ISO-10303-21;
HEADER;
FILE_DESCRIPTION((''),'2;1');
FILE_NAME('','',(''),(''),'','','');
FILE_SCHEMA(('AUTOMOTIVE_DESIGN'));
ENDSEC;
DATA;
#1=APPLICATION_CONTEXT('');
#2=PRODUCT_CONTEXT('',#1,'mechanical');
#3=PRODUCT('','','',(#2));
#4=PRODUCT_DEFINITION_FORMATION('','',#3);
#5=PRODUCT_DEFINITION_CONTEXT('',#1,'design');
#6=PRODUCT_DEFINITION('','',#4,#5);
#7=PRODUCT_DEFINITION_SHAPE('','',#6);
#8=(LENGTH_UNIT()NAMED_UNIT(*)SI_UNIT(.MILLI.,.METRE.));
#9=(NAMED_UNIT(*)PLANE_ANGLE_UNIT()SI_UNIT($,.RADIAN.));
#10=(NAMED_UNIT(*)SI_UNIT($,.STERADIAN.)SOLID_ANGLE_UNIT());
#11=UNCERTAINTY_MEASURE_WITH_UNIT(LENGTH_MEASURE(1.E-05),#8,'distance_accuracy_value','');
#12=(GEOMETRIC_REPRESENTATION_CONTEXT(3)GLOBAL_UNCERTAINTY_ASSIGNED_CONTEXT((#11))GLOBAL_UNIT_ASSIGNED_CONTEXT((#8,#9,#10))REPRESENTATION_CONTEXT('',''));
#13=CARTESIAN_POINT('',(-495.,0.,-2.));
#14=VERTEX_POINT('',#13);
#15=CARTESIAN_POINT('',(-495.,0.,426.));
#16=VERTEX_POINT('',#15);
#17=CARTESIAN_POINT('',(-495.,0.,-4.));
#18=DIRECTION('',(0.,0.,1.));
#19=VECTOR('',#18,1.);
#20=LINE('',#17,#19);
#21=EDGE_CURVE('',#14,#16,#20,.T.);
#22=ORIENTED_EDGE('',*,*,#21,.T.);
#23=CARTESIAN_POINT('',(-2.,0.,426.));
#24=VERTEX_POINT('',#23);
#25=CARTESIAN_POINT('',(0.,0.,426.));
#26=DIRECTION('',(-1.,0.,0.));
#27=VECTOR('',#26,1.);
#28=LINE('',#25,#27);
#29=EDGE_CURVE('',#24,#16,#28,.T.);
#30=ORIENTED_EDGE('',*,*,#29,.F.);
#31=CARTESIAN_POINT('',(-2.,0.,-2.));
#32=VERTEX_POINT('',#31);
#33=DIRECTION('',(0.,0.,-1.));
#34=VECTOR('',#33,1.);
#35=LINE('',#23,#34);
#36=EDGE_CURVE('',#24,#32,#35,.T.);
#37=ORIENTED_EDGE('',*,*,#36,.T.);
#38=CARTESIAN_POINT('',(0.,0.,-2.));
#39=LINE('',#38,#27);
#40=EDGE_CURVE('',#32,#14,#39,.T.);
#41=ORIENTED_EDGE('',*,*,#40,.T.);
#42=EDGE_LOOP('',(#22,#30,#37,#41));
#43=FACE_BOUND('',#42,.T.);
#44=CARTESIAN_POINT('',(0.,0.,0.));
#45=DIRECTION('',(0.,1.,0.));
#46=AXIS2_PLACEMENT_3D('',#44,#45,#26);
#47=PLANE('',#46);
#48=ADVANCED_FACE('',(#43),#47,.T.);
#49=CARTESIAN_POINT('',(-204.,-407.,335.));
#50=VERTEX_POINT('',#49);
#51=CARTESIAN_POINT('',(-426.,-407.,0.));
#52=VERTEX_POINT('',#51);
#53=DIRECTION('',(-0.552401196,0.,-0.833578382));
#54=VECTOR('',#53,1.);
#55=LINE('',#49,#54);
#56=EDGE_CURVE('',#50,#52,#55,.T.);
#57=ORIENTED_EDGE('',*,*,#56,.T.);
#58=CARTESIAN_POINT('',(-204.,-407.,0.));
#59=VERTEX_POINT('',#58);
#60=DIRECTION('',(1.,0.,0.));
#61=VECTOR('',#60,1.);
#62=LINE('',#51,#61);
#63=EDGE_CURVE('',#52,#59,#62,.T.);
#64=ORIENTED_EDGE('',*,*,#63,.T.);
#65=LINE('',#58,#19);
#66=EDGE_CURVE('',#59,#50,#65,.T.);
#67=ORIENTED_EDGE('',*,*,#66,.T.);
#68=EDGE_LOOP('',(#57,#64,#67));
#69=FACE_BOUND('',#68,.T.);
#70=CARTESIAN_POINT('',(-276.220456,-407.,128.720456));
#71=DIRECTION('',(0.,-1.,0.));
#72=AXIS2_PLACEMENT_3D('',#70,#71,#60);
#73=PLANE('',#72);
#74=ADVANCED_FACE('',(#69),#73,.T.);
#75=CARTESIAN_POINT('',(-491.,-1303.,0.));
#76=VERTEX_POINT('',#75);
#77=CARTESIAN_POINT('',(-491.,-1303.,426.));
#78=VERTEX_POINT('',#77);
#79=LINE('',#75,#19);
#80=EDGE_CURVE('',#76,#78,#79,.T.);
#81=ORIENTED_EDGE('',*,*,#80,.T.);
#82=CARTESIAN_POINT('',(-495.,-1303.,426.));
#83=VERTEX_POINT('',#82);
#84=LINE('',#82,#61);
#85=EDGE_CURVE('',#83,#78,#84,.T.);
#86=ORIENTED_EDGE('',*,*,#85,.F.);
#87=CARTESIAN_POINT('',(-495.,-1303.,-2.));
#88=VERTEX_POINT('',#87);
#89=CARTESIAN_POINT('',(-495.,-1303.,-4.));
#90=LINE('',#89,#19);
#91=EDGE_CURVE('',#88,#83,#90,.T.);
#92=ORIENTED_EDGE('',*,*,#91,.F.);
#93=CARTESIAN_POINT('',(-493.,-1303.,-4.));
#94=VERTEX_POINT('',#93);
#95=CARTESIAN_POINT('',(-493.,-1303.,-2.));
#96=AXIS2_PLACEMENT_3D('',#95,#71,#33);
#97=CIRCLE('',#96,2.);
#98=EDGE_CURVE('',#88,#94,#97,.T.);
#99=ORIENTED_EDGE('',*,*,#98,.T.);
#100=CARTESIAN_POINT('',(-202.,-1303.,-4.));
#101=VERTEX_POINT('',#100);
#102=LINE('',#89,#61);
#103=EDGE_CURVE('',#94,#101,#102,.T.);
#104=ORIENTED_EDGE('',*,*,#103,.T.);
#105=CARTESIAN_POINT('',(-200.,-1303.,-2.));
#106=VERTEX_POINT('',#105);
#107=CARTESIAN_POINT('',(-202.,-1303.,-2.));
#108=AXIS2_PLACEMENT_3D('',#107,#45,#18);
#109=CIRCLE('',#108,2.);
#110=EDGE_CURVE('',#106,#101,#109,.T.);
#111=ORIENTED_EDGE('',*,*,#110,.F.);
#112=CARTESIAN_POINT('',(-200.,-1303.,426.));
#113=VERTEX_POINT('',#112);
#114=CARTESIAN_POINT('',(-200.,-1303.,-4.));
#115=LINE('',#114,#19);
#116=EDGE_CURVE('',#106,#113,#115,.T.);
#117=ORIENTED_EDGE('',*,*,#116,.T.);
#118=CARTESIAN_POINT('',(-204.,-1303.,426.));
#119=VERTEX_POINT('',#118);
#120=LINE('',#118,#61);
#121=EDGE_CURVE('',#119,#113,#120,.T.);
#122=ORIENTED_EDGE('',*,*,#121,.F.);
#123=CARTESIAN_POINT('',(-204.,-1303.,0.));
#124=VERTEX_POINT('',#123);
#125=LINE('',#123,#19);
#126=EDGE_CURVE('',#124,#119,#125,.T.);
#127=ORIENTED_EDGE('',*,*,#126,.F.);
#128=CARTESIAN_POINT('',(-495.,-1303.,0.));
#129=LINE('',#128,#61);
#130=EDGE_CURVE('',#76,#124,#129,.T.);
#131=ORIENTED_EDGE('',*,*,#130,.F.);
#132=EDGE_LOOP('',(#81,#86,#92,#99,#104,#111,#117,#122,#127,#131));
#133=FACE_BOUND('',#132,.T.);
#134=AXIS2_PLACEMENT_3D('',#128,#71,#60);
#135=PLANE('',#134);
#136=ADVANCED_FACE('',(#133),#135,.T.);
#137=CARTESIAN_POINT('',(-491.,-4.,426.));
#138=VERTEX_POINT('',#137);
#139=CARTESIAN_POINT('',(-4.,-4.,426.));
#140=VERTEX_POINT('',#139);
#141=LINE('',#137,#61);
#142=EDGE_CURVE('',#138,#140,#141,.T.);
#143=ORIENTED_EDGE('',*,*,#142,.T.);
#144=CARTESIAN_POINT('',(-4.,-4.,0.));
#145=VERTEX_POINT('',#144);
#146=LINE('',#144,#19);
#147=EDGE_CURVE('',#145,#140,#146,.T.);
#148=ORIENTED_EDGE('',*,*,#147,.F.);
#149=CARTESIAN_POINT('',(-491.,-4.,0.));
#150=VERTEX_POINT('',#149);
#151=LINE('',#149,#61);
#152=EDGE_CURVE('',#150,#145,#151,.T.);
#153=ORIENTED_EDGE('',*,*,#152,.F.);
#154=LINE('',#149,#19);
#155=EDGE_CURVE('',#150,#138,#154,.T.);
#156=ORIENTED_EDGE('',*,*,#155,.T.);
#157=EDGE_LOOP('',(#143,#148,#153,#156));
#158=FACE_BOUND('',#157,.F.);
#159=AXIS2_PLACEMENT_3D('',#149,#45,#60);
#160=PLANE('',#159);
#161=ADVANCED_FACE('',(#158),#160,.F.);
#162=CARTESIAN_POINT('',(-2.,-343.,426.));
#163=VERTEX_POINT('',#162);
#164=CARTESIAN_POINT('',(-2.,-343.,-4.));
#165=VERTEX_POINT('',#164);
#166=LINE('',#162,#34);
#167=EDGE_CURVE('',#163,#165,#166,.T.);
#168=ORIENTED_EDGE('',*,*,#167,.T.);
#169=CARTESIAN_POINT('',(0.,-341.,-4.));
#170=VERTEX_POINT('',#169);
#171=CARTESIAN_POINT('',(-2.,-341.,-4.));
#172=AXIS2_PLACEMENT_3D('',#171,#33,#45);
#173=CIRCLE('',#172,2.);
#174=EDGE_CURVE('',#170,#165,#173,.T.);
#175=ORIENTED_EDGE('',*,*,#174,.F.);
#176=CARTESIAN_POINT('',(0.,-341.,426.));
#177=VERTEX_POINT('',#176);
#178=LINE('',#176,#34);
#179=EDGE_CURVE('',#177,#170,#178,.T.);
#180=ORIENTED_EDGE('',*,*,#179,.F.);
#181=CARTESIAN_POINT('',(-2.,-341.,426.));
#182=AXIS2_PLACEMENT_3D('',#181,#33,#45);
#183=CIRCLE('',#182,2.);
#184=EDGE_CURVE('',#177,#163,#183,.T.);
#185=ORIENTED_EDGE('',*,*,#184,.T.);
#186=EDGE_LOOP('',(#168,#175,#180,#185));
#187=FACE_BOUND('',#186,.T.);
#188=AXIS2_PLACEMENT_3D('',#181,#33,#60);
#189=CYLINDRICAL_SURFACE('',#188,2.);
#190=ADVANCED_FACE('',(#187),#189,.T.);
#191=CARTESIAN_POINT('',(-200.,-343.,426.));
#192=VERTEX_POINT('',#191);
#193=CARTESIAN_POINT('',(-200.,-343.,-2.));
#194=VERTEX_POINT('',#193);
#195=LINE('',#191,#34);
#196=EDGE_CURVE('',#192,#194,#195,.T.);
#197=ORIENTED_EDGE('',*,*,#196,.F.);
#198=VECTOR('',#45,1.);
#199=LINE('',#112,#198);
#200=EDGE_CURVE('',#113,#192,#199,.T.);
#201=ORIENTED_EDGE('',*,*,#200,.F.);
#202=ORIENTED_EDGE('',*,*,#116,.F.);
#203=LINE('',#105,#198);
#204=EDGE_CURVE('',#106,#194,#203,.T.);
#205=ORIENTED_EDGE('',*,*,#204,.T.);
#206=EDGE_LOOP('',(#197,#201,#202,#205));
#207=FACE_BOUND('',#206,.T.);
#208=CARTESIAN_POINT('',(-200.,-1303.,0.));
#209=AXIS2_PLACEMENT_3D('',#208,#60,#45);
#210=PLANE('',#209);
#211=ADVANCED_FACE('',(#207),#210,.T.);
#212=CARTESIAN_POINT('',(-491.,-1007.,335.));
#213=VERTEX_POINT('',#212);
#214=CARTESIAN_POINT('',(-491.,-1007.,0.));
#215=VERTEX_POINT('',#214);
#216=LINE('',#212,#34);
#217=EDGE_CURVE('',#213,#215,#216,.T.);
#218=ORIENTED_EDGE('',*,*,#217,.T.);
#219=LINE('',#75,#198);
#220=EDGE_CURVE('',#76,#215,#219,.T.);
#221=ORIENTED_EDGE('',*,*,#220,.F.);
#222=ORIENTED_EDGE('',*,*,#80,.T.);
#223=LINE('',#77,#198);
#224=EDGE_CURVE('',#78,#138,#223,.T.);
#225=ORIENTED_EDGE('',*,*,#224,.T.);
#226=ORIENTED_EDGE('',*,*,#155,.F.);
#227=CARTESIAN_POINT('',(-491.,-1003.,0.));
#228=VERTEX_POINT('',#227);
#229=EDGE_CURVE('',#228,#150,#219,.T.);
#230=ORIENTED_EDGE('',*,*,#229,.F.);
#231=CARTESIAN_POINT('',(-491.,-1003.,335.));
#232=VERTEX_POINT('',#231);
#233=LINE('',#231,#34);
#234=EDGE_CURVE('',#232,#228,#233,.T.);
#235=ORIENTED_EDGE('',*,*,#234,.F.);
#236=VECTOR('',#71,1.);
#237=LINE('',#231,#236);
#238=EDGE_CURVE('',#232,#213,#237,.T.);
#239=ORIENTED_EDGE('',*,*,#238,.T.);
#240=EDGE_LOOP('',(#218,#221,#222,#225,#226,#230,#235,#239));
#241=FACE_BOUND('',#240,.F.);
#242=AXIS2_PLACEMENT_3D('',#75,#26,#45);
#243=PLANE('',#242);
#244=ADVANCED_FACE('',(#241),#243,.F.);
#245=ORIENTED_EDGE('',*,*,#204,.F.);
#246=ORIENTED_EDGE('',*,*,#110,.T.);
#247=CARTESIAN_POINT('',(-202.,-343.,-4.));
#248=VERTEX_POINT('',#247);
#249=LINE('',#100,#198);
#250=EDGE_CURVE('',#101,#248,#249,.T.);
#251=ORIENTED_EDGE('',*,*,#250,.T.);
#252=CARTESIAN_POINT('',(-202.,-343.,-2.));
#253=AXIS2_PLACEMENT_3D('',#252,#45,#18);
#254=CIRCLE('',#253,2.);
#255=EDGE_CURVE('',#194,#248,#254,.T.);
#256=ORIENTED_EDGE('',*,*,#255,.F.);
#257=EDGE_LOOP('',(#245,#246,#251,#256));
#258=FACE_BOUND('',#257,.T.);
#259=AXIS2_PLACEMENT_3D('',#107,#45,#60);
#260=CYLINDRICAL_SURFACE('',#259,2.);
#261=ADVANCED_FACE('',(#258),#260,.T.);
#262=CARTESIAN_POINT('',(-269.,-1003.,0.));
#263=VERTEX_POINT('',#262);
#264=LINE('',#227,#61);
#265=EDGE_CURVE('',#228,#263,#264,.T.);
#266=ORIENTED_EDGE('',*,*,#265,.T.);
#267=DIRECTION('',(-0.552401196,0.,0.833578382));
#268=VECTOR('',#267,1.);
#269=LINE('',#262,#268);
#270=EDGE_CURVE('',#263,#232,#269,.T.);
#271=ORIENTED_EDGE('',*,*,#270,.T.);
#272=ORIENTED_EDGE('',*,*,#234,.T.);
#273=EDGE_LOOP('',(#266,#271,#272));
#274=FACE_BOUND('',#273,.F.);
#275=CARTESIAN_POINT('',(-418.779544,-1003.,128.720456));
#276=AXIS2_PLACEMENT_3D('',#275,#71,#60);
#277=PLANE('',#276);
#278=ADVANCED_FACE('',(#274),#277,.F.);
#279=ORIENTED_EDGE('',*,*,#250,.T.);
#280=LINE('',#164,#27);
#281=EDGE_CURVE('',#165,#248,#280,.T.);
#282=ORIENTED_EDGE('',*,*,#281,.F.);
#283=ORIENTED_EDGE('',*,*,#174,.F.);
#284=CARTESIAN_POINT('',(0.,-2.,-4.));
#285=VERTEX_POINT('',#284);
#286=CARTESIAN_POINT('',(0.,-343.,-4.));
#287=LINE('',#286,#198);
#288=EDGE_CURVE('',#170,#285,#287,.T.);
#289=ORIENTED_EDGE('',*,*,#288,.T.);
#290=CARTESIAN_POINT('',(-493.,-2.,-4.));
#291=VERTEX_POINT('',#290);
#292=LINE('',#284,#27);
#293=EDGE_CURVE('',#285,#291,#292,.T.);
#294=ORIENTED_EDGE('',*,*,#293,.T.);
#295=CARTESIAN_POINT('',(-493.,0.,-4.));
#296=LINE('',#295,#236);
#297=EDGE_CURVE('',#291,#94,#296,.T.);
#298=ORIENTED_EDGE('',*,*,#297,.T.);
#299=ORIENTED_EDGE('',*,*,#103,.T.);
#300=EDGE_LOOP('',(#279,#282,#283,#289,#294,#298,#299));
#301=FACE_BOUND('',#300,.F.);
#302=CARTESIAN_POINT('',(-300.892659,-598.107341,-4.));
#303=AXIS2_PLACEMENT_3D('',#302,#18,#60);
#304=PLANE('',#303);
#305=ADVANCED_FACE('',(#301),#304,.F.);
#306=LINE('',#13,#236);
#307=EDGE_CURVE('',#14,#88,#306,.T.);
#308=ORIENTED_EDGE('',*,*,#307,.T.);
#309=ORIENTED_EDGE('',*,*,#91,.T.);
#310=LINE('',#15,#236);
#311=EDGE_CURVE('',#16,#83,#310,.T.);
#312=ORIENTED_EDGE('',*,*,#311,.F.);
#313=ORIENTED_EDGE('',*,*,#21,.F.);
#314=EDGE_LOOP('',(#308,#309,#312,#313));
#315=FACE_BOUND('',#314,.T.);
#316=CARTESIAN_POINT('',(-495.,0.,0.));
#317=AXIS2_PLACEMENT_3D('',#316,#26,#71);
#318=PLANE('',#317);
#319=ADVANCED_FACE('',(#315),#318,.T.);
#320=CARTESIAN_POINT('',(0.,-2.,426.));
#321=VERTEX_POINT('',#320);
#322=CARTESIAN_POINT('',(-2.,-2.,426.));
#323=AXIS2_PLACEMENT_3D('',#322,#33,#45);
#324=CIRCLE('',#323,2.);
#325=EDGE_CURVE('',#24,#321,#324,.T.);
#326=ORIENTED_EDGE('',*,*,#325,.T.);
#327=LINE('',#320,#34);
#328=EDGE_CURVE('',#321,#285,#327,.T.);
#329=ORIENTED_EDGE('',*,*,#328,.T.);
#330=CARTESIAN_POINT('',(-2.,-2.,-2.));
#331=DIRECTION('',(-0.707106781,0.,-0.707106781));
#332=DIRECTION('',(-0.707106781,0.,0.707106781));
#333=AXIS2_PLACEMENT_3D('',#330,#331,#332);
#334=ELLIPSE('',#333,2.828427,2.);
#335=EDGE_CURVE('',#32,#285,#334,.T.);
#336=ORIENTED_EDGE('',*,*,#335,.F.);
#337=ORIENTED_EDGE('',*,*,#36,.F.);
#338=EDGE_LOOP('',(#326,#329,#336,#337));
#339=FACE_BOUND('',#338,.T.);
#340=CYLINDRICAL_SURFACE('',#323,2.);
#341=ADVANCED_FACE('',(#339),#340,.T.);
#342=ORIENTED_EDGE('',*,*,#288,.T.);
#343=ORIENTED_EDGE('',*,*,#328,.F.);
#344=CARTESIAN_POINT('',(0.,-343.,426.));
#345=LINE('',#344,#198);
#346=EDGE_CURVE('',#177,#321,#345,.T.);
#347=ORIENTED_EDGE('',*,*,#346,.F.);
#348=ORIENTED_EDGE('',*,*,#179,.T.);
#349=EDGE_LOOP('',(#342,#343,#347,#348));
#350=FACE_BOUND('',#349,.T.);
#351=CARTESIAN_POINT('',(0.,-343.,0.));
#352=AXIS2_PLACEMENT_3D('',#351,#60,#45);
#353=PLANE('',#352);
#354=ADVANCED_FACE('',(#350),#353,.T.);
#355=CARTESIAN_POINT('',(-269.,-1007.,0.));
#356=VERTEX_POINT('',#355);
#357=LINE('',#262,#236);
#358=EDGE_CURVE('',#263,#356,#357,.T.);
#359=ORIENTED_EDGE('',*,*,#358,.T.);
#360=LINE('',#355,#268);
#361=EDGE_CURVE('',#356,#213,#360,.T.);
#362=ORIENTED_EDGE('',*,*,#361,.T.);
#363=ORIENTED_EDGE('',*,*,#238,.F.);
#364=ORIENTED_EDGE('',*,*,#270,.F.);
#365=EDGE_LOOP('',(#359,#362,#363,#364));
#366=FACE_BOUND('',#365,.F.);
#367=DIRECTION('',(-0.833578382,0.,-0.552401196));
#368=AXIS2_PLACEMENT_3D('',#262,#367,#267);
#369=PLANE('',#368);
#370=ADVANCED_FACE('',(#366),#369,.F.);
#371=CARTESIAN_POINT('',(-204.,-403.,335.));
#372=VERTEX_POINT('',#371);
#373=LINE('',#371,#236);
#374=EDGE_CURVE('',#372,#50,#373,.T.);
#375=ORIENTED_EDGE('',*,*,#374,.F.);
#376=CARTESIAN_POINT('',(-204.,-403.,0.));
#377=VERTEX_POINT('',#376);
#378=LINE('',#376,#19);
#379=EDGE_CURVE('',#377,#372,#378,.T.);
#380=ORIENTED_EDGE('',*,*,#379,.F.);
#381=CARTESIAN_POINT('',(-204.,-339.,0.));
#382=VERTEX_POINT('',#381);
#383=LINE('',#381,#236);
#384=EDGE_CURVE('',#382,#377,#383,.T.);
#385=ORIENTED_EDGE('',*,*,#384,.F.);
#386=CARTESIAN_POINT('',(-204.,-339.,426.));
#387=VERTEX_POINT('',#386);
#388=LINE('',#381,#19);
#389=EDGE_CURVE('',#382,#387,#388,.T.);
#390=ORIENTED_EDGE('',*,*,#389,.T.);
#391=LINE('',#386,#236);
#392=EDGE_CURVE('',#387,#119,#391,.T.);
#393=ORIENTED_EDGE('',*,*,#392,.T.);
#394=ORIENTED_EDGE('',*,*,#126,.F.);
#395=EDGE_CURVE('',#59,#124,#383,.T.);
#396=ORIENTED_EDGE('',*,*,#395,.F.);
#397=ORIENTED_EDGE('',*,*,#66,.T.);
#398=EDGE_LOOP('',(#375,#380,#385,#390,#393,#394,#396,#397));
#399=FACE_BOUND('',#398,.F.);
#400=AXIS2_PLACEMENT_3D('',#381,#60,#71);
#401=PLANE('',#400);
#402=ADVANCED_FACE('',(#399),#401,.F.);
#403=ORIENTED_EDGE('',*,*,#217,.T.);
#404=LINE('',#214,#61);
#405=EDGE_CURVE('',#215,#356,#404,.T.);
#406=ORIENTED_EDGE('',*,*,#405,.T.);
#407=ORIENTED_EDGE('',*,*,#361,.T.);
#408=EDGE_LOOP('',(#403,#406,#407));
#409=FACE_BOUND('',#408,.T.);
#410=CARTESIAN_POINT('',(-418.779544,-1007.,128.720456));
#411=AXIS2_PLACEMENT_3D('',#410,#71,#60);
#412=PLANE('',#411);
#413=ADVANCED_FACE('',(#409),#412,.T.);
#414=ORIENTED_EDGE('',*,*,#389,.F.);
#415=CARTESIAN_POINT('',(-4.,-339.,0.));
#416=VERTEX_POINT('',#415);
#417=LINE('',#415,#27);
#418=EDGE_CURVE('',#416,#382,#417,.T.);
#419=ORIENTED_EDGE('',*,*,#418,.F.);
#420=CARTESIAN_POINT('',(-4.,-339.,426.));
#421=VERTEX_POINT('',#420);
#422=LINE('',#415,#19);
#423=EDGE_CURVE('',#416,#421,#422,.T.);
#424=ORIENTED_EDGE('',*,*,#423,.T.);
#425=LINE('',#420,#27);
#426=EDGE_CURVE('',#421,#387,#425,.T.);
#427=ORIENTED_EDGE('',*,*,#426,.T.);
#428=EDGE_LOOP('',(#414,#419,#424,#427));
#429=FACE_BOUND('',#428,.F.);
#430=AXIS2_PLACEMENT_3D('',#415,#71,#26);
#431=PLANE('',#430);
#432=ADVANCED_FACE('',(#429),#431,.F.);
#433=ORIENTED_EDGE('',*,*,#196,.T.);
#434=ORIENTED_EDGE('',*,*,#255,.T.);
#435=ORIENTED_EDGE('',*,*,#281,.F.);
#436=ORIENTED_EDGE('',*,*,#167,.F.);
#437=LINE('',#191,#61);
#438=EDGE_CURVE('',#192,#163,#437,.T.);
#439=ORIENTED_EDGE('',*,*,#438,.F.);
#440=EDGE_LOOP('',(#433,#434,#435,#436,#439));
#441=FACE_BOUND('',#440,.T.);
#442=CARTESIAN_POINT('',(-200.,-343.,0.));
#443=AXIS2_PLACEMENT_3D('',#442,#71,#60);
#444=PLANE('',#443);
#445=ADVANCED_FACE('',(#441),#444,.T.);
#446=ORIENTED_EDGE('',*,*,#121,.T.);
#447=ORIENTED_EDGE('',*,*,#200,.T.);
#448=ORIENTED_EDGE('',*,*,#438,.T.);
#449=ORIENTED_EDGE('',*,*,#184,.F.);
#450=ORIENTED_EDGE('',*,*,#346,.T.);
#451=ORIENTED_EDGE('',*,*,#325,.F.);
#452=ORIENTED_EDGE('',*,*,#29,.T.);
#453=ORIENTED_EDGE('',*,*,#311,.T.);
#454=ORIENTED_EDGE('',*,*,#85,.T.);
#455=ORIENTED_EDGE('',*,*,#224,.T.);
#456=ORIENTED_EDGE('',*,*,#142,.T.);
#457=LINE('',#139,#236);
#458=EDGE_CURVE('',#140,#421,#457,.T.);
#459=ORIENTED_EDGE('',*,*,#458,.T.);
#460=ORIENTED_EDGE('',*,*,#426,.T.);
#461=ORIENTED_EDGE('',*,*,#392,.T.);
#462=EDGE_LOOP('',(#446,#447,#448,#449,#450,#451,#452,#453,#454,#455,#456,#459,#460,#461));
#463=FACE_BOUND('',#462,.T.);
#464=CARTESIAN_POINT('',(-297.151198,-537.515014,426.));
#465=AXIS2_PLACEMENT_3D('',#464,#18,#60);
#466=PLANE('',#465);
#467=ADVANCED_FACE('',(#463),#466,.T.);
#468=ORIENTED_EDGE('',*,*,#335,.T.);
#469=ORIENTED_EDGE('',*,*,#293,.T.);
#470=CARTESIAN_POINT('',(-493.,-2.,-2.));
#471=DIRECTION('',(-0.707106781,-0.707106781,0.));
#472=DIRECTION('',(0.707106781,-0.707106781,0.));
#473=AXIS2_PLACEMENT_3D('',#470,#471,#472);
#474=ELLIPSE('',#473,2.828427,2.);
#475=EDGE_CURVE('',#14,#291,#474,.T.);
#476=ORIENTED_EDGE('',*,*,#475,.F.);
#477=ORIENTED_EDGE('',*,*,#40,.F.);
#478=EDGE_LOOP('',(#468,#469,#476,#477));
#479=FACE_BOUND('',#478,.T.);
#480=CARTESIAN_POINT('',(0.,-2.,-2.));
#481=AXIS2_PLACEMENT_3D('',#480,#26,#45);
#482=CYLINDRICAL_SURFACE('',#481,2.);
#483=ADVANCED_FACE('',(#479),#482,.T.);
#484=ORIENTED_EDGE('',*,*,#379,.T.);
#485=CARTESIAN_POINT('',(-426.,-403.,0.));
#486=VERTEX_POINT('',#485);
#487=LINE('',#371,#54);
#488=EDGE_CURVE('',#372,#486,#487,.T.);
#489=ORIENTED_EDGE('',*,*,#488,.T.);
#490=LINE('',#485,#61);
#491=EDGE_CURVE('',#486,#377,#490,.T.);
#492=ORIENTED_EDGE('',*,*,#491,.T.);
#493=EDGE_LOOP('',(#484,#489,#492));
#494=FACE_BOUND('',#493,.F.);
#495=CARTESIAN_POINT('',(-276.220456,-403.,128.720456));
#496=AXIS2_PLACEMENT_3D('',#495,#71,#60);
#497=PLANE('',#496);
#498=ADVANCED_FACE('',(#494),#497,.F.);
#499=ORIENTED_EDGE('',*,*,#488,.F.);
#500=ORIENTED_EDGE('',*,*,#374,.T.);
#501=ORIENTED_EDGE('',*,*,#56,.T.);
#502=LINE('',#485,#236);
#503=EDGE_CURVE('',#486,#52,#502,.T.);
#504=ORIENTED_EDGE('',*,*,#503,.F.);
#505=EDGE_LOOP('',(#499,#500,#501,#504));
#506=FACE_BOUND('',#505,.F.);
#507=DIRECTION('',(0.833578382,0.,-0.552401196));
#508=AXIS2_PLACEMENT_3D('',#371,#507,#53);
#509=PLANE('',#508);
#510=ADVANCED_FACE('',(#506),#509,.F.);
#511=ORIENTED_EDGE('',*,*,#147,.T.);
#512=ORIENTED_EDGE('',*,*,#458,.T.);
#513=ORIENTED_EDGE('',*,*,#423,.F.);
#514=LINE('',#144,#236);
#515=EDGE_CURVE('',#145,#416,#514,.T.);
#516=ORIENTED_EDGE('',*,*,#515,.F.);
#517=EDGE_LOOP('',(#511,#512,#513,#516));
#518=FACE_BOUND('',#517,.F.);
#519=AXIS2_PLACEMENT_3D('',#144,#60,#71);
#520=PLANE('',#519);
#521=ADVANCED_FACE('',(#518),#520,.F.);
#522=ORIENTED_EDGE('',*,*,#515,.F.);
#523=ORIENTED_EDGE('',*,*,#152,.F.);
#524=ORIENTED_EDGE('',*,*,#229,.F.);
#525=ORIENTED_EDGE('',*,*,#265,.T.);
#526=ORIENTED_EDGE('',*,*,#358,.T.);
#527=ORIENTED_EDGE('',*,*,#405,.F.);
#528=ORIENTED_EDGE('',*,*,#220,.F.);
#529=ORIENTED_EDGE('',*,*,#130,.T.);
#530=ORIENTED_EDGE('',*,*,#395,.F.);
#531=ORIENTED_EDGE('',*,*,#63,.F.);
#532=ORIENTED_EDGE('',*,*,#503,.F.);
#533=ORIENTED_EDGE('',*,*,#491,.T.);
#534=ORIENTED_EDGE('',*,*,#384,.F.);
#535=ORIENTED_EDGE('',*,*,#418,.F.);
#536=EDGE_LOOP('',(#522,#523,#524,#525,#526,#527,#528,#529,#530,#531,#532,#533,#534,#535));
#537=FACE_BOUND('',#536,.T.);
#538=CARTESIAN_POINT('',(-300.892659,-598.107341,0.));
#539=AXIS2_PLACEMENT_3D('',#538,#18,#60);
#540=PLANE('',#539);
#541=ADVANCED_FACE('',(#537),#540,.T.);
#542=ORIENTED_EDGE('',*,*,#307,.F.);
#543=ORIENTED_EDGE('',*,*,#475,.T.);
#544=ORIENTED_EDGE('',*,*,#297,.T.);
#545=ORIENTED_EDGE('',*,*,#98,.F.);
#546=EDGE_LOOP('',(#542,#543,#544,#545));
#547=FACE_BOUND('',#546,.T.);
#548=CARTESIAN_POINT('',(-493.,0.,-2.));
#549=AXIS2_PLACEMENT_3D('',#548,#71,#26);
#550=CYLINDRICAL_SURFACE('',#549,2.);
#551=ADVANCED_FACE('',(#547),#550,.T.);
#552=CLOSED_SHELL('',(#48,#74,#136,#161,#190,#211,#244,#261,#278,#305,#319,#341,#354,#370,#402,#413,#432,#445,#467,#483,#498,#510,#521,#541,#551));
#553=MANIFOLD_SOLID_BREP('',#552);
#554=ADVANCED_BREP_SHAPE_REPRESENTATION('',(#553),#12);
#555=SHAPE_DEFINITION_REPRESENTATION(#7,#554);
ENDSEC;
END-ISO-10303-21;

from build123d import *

# Parameters (mm, degrees)
F1_DEPTH  = 426
F3_DEPTH  = 4
F4_R      = 2
F7_DEPTH  = 4
F10_DEPTH = 4


# Not quite as in the source:
# - a feature names something its author has since deleted; it is built from what else it names


with BuildPart() as f1:
    # F0 (on Top) → F1 (new body)
    with BuildSketch(Plane.XY):
        Polygon((-200, -343), (0, -343), (0, 0), (-495, 0), (-495, -1303), (-491, -1303), (-491, -4), (-4, -4), (-4, -339), (-204, -339), (-204, -1303), (-200, -1303), align=None)
    extrude(amount=F1_DEPTH)

    # F2 (on Top) → F3 (join)
    with BuildSketch(Plane.XY):
        Polygon((0, 0), (-495, 0), (-495, -1303), (-200, -1303), (-200, -343), (0, -343), align=None)
    extrude(amount=-F3_DEPTH)

    # F4
    f4_edges = [f1.edges().sort_by_distance(p)[0] for p in [
        (-200, -823, -4),
        (-495, -651.5, -4),
        (-247.5, 0, -4),
        (0, -343, 211),
        (0, 0, 211),
    ]]
    fillet(f4_edges, radius=F4_R)

    # F6 (on offset) → F7 (join)
    with BuildSketch(Plane.XZ.offset(1003)):
        Polygon((-491, 0), (-269, 0), (-491, 335), align=None)
    extrude(amount=F7_DEPTH)

    # F9 (on offset) → F10 (join)
    with BuildSketch(Plane.XZ.offset(403)):
        Polygon((-204, 335), (-426, 0), (-204, 0), align=None)
    extrude(amount=F10_DEPTH)


solid = f1.part
